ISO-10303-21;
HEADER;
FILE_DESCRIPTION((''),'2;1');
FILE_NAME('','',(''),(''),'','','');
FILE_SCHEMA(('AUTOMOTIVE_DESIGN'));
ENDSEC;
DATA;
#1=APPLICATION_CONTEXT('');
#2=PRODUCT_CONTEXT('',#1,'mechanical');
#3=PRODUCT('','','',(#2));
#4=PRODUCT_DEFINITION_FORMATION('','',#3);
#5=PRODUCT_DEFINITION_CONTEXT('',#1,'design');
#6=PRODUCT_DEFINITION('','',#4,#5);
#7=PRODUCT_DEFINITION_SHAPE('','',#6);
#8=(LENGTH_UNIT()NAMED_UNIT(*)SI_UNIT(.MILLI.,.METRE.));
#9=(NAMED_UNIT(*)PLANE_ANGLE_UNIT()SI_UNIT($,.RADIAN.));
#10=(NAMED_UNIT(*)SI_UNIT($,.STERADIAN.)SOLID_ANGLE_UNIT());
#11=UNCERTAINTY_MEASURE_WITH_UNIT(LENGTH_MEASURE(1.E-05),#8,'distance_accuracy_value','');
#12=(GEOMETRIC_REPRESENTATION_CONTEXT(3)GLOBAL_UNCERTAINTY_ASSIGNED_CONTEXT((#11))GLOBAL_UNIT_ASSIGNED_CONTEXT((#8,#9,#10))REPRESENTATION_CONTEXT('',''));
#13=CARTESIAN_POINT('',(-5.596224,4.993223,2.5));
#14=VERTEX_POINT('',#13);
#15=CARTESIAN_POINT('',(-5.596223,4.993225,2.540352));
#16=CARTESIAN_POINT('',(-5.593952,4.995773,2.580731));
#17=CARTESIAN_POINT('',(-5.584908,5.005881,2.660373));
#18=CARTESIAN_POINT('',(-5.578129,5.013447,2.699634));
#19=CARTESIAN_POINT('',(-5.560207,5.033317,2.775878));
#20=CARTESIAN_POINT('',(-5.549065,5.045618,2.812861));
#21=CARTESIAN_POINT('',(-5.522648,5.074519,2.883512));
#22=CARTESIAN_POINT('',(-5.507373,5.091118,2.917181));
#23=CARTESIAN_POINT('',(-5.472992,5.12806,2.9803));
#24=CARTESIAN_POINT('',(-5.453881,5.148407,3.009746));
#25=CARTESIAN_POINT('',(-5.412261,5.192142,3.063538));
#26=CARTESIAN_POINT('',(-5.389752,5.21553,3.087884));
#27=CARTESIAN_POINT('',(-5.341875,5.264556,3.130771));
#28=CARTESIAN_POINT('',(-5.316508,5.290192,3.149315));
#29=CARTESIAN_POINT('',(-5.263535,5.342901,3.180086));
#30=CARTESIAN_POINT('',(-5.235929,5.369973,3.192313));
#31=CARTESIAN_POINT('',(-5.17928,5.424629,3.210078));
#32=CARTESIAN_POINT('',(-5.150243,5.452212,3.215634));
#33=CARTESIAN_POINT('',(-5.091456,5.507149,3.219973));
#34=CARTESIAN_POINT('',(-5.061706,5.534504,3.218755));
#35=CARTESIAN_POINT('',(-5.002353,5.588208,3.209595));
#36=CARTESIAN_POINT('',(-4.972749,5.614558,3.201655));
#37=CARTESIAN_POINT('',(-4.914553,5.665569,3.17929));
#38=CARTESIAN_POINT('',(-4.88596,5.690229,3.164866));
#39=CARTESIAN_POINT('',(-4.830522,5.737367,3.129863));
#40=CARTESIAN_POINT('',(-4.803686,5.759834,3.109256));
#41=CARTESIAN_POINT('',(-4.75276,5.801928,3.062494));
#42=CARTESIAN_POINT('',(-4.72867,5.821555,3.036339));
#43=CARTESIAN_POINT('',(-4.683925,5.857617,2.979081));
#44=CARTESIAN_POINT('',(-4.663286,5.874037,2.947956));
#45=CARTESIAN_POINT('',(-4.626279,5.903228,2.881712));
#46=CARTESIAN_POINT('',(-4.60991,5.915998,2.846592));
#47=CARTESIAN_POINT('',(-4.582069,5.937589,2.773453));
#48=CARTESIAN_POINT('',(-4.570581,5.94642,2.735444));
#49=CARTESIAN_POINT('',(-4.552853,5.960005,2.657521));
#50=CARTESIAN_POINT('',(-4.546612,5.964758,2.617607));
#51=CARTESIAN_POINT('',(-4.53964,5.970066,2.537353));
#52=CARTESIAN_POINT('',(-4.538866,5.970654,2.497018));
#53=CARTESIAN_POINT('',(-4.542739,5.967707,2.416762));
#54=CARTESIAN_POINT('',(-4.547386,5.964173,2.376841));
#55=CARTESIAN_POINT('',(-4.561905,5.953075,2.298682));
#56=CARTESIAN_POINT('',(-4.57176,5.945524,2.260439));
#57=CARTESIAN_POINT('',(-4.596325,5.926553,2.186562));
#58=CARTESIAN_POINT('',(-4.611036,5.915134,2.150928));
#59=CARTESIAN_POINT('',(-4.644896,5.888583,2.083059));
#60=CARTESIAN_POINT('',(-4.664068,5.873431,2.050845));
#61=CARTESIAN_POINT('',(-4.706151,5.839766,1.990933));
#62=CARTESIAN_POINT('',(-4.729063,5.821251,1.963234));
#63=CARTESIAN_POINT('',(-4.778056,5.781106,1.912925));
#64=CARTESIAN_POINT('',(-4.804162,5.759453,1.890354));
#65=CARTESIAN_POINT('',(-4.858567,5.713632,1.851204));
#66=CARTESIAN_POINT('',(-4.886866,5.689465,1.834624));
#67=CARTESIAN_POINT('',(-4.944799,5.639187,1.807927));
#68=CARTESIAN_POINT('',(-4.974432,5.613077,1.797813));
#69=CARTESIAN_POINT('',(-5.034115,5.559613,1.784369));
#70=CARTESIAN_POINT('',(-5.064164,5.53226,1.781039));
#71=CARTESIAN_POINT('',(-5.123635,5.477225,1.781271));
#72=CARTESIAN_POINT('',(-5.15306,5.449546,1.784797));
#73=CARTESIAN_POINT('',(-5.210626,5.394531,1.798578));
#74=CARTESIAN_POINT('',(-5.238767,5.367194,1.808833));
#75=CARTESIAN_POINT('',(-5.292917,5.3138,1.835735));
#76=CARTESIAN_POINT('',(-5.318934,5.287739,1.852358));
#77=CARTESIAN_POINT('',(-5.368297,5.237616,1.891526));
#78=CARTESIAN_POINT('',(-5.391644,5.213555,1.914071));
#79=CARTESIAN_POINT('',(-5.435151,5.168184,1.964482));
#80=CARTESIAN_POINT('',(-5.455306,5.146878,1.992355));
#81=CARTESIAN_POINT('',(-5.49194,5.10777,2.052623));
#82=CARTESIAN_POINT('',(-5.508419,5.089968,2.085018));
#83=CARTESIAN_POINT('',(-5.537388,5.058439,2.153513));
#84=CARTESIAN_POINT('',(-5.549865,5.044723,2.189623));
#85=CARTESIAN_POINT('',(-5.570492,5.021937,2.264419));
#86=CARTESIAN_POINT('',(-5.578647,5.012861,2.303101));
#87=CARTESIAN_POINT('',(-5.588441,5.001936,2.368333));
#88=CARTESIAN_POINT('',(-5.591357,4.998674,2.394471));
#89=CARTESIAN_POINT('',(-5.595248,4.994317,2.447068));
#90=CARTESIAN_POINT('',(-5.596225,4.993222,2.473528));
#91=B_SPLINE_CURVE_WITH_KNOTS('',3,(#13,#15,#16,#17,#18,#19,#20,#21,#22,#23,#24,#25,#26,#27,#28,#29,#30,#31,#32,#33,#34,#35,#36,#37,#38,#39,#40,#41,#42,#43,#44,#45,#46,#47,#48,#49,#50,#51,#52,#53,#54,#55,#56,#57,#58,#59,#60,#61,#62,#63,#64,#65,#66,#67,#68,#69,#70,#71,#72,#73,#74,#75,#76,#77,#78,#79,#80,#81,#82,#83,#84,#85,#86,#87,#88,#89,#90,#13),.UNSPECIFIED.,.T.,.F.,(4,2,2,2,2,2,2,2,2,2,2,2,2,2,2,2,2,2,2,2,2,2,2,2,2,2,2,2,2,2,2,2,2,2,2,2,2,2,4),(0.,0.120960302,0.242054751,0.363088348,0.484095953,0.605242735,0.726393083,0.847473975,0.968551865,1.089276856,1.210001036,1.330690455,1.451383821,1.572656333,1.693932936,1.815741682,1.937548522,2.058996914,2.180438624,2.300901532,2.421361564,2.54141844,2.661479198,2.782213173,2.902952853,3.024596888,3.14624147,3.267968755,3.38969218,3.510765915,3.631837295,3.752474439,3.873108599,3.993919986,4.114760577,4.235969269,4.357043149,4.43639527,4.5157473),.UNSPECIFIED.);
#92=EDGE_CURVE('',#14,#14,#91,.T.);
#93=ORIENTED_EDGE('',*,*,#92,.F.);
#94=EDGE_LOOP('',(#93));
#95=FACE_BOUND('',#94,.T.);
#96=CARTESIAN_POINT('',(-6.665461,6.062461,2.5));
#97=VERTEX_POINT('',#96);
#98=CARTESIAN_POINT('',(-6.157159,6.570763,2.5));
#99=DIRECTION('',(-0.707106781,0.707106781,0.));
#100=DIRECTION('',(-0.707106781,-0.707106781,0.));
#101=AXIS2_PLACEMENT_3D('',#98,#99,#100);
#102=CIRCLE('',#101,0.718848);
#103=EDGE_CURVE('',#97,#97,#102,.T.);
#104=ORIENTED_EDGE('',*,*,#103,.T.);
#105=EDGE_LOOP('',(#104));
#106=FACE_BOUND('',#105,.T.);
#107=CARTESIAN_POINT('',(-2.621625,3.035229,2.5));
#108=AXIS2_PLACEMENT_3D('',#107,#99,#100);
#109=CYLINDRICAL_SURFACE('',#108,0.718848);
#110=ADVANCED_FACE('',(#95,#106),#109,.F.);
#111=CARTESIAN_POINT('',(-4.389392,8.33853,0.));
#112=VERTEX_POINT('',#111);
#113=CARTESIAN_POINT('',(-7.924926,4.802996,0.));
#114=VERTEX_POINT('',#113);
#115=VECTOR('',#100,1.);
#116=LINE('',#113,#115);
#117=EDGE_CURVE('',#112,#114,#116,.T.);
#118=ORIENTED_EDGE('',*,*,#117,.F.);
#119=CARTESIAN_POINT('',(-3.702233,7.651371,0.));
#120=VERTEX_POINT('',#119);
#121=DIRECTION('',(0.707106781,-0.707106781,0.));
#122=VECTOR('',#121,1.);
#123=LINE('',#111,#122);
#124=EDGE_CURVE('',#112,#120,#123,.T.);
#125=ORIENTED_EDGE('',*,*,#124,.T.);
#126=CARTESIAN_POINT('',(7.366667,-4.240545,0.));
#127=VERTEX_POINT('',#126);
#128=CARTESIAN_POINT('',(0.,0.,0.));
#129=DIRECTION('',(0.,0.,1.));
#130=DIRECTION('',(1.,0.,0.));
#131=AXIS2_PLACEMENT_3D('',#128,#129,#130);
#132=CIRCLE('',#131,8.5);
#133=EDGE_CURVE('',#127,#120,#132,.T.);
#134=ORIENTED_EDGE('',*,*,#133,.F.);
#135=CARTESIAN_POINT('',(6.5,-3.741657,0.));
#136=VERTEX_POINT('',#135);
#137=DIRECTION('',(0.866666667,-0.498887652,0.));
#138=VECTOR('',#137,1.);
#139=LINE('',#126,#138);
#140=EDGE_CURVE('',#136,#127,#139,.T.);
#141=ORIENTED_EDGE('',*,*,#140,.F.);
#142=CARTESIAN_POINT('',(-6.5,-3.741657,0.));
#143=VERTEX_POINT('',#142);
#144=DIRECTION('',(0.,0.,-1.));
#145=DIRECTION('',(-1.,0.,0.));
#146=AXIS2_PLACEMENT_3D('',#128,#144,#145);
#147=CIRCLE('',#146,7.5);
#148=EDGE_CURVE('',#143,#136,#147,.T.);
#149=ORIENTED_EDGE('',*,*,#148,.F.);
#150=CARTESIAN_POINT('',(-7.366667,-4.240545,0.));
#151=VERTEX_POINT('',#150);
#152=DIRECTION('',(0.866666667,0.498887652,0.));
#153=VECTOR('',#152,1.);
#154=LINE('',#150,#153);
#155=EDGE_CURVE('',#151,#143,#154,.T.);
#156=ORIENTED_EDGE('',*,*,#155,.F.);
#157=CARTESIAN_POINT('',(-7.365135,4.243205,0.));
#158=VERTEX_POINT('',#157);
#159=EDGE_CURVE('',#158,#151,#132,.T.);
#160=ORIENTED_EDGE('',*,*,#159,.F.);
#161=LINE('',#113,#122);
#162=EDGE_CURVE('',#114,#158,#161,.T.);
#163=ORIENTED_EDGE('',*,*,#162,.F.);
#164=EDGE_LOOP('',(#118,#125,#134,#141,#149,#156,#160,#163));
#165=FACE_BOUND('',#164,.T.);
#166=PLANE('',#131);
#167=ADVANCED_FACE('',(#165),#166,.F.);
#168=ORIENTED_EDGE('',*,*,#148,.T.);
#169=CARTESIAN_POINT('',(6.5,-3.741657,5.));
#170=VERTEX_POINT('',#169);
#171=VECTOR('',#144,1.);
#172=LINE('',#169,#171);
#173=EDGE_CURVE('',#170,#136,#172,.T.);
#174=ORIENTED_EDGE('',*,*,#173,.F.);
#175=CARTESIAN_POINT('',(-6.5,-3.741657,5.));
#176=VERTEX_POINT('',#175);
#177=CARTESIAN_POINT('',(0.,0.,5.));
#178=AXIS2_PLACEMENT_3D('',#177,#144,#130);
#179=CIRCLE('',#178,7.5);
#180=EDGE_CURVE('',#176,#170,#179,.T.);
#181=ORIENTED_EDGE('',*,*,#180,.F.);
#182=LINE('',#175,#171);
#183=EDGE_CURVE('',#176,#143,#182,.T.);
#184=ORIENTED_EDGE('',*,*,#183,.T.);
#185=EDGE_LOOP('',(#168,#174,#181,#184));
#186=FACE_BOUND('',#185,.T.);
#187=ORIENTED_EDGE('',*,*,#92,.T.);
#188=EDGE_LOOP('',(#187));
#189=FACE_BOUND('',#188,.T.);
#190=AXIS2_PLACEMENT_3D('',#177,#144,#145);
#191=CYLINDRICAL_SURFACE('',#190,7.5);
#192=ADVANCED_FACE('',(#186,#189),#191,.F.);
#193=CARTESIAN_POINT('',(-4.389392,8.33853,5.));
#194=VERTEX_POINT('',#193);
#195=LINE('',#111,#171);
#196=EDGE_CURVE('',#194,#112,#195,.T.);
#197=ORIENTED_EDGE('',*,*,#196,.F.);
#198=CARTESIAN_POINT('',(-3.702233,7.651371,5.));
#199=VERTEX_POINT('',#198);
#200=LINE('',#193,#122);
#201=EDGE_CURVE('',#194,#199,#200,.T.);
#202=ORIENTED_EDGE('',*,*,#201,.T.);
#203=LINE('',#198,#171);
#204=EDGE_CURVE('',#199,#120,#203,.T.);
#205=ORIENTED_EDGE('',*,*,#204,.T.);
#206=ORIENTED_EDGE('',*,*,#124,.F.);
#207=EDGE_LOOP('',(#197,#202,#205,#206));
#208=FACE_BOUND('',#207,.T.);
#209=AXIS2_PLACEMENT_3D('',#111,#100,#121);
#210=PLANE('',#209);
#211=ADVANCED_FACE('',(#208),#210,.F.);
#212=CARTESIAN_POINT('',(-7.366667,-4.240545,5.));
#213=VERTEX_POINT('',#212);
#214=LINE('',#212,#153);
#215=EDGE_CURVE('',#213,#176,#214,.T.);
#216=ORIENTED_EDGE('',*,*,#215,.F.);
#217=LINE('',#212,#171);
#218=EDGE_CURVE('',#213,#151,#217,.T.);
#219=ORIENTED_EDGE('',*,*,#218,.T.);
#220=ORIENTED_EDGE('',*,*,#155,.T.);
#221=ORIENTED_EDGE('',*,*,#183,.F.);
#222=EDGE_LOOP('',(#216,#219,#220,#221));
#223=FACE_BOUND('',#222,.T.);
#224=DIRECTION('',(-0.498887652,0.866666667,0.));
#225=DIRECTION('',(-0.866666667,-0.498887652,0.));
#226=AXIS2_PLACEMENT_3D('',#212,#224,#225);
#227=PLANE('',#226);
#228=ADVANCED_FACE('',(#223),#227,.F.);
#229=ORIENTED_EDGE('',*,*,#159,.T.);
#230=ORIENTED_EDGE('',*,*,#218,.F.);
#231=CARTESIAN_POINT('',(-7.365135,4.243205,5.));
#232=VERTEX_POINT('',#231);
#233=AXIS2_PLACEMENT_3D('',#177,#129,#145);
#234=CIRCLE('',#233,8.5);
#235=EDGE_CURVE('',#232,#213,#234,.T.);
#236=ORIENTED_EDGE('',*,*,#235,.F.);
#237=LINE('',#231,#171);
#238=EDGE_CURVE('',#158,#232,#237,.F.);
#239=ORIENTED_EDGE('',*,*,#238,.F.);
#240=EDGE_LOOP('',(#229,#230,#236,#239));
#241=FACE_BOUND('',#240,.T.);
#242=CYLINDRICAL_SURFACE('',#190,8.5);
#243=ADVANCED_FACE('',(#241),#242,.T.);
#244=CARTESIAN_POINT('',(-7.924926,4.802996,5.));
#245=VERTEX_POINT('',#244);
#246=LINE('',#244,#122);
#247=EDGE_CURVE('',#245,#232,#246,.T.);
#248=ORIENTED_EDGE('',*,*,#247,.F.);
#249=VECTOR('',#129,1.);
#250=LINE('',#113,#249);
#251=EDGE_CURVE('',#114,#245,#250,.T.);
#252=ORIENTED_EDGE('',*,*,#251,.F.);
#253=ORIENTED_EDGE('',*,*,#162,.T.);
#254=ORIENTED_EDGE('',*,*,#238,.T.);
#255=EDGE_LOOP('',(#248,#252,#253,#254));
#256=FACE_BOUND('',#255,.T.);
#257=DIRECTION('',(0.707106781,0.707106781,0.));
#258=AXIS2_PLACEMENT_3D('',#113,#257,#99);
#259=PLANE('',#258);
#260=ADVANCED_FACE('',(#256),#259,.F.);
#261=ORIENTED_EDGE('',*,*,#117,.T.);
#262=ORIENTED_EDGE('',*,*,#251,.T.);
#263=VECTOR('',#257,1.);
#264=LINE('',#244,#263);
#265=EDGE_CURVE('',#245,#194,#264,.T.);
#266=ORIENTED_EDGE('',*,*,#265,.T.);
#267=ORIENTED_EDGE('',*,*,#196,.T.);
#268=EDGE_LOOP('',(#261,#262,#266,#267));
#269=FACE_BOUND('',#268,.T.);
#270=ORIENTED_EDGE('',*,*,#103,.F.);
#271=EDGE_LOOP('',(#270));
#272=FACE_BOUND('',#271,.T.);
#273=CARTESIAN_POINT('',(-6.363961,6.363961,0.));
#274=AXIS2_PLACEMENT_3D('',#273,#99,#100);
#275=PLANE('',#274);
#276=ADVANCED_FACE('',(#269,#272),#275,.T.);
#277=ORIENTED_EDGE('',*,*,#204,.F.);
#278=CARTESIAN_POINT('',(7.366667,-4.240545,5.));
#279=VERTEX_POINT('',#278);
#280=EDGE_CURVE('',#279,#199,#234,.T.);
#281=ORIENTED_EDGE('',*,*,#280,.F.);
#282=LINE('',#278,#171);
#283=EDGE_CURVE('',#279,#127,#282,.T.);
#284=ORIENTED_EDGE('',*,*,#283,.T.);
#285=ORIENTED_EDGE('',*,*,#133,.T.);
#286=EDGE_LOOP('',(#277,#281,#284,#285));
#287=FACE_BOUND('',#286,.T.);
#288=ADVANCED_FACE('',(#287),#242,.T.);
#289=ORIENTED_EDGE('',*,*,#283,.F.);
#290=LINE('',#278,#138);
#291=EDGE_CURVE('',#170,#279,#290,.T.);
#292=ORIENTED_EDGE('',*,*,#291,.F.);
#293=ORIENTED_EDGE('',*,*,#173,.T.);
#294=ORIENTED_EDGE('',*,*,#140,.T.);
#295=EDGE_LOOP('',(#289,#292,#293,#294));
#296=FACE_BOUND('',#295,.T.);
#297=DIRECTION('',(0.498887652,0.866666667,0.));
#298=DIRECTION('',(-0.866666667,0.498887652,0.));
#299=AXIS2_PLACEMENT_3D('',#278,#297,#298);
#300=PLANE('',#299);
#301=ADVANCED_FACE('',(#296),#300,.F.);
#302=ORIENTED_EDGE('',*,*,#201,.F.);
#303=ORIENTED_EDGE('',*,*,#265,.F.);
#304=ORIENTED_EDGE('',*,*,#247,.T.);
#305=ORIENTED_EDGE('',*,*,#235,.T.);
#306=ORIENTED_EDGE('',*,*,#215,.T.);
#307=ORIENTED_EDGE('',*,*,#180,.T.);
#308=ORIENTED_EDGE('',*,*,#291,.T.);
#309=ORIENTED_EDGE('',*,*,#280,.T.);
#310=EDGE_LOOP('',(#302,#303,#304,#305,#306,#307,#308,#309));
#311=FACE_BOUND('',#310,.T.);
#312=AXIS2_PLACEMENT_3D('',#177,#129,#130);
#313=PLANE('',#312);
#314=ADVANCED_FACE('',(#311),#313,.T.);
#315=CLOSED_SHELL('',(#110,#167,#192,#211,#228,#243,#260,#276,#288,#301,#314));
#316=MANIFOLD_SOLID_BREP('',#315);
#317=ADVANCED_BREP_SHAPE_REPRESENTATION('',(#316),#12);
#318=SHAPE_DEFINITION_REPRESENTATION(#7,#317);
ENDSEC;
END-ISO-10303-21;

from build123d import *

# Parameters (mm, degrees)
BOSS_EXTRUDE2_DEPTH = 5
BOSS_EXTRUDE3_DEPTH = 5
SKETCH3_R           = 0.71884788
CUT_EXTRUDE1_DEPTH  = 5


# Read off the part's stored shape, not the designer's step: Boss-Extrude3
with BuildPart() as part:
    # Sketch1 → Boss-Extrude2 (new body)
    with BuildSketch(Plane.XY):
        with BuildLine():
            Line((-7.366666667, -4.240545038), (-6.5, -3.741657387))
            ThreePointArc((-6.5, -3.741657387), (-7.245688373, -1.936491673), (-7.5, 0))
            ThreePointArc((-7.5, 0), (0, 7.5), (7.5, 0))
            ThreePointArc((7.5, 0), (7.245688373, -1.936491673), (6.5, -3.741657387))
            Line((6.5, -3.741657387), (7.366666667, -4.240545038))
            ThreePointArc((7.366666667, -4.240545038), (8.211780156, -2.194690563), (8.5, 0))
            ThreePointArc((8.5, 0), (0, 8.5), (-8.5, 0))
            ThreePointArc((-8.5, 0), (-8.211780156, -2.194690563), (-7.366666667, -4.240545038))
        make_face()
    extrude(amount=BOSS_EXTRUDE2_DEPTH)

    # Boss-Extrude3 outline → Boss-Extrude3 (add)
    with BuildSketch(Plane.XY):
        with BuildLine():
            Line((-7.924926196, 4.802995865), (-7.365135024, 4.243204694))
            ThreePointArc((-7.365135024, 4.243204694), (-5.790125857, 6.222896638), (-3.702233025, 7.651370506))
            Line((-3.702233025, 7.651370506), (-4.38939229, 8.338529771))
            Line((-4.38939229, 8.338529771), (-7.924926196, 4.802995865))
        make_face()
    extrude(amount=BOSS_EXTRUDE3_DEPTH)

    # Sketch3 → Cut-Extrude1 (cut)
    with BuildSketch(Plane(origin=(-6.363961031, 6.363961031, 0), x_dir=(0, 0, 1), z_dir=(-0.7071067811865476, 0.7071067811865476, 0))):
        with Locations(Location((2.5, 0.292461893, 0), (0, 0, 270))):
            Circle(SKETCH3_R)
    extrude(amount=-CUT_EXTRUDE1_DEPTH, mode=Mode.SUBTRACT)


solid = part.part
